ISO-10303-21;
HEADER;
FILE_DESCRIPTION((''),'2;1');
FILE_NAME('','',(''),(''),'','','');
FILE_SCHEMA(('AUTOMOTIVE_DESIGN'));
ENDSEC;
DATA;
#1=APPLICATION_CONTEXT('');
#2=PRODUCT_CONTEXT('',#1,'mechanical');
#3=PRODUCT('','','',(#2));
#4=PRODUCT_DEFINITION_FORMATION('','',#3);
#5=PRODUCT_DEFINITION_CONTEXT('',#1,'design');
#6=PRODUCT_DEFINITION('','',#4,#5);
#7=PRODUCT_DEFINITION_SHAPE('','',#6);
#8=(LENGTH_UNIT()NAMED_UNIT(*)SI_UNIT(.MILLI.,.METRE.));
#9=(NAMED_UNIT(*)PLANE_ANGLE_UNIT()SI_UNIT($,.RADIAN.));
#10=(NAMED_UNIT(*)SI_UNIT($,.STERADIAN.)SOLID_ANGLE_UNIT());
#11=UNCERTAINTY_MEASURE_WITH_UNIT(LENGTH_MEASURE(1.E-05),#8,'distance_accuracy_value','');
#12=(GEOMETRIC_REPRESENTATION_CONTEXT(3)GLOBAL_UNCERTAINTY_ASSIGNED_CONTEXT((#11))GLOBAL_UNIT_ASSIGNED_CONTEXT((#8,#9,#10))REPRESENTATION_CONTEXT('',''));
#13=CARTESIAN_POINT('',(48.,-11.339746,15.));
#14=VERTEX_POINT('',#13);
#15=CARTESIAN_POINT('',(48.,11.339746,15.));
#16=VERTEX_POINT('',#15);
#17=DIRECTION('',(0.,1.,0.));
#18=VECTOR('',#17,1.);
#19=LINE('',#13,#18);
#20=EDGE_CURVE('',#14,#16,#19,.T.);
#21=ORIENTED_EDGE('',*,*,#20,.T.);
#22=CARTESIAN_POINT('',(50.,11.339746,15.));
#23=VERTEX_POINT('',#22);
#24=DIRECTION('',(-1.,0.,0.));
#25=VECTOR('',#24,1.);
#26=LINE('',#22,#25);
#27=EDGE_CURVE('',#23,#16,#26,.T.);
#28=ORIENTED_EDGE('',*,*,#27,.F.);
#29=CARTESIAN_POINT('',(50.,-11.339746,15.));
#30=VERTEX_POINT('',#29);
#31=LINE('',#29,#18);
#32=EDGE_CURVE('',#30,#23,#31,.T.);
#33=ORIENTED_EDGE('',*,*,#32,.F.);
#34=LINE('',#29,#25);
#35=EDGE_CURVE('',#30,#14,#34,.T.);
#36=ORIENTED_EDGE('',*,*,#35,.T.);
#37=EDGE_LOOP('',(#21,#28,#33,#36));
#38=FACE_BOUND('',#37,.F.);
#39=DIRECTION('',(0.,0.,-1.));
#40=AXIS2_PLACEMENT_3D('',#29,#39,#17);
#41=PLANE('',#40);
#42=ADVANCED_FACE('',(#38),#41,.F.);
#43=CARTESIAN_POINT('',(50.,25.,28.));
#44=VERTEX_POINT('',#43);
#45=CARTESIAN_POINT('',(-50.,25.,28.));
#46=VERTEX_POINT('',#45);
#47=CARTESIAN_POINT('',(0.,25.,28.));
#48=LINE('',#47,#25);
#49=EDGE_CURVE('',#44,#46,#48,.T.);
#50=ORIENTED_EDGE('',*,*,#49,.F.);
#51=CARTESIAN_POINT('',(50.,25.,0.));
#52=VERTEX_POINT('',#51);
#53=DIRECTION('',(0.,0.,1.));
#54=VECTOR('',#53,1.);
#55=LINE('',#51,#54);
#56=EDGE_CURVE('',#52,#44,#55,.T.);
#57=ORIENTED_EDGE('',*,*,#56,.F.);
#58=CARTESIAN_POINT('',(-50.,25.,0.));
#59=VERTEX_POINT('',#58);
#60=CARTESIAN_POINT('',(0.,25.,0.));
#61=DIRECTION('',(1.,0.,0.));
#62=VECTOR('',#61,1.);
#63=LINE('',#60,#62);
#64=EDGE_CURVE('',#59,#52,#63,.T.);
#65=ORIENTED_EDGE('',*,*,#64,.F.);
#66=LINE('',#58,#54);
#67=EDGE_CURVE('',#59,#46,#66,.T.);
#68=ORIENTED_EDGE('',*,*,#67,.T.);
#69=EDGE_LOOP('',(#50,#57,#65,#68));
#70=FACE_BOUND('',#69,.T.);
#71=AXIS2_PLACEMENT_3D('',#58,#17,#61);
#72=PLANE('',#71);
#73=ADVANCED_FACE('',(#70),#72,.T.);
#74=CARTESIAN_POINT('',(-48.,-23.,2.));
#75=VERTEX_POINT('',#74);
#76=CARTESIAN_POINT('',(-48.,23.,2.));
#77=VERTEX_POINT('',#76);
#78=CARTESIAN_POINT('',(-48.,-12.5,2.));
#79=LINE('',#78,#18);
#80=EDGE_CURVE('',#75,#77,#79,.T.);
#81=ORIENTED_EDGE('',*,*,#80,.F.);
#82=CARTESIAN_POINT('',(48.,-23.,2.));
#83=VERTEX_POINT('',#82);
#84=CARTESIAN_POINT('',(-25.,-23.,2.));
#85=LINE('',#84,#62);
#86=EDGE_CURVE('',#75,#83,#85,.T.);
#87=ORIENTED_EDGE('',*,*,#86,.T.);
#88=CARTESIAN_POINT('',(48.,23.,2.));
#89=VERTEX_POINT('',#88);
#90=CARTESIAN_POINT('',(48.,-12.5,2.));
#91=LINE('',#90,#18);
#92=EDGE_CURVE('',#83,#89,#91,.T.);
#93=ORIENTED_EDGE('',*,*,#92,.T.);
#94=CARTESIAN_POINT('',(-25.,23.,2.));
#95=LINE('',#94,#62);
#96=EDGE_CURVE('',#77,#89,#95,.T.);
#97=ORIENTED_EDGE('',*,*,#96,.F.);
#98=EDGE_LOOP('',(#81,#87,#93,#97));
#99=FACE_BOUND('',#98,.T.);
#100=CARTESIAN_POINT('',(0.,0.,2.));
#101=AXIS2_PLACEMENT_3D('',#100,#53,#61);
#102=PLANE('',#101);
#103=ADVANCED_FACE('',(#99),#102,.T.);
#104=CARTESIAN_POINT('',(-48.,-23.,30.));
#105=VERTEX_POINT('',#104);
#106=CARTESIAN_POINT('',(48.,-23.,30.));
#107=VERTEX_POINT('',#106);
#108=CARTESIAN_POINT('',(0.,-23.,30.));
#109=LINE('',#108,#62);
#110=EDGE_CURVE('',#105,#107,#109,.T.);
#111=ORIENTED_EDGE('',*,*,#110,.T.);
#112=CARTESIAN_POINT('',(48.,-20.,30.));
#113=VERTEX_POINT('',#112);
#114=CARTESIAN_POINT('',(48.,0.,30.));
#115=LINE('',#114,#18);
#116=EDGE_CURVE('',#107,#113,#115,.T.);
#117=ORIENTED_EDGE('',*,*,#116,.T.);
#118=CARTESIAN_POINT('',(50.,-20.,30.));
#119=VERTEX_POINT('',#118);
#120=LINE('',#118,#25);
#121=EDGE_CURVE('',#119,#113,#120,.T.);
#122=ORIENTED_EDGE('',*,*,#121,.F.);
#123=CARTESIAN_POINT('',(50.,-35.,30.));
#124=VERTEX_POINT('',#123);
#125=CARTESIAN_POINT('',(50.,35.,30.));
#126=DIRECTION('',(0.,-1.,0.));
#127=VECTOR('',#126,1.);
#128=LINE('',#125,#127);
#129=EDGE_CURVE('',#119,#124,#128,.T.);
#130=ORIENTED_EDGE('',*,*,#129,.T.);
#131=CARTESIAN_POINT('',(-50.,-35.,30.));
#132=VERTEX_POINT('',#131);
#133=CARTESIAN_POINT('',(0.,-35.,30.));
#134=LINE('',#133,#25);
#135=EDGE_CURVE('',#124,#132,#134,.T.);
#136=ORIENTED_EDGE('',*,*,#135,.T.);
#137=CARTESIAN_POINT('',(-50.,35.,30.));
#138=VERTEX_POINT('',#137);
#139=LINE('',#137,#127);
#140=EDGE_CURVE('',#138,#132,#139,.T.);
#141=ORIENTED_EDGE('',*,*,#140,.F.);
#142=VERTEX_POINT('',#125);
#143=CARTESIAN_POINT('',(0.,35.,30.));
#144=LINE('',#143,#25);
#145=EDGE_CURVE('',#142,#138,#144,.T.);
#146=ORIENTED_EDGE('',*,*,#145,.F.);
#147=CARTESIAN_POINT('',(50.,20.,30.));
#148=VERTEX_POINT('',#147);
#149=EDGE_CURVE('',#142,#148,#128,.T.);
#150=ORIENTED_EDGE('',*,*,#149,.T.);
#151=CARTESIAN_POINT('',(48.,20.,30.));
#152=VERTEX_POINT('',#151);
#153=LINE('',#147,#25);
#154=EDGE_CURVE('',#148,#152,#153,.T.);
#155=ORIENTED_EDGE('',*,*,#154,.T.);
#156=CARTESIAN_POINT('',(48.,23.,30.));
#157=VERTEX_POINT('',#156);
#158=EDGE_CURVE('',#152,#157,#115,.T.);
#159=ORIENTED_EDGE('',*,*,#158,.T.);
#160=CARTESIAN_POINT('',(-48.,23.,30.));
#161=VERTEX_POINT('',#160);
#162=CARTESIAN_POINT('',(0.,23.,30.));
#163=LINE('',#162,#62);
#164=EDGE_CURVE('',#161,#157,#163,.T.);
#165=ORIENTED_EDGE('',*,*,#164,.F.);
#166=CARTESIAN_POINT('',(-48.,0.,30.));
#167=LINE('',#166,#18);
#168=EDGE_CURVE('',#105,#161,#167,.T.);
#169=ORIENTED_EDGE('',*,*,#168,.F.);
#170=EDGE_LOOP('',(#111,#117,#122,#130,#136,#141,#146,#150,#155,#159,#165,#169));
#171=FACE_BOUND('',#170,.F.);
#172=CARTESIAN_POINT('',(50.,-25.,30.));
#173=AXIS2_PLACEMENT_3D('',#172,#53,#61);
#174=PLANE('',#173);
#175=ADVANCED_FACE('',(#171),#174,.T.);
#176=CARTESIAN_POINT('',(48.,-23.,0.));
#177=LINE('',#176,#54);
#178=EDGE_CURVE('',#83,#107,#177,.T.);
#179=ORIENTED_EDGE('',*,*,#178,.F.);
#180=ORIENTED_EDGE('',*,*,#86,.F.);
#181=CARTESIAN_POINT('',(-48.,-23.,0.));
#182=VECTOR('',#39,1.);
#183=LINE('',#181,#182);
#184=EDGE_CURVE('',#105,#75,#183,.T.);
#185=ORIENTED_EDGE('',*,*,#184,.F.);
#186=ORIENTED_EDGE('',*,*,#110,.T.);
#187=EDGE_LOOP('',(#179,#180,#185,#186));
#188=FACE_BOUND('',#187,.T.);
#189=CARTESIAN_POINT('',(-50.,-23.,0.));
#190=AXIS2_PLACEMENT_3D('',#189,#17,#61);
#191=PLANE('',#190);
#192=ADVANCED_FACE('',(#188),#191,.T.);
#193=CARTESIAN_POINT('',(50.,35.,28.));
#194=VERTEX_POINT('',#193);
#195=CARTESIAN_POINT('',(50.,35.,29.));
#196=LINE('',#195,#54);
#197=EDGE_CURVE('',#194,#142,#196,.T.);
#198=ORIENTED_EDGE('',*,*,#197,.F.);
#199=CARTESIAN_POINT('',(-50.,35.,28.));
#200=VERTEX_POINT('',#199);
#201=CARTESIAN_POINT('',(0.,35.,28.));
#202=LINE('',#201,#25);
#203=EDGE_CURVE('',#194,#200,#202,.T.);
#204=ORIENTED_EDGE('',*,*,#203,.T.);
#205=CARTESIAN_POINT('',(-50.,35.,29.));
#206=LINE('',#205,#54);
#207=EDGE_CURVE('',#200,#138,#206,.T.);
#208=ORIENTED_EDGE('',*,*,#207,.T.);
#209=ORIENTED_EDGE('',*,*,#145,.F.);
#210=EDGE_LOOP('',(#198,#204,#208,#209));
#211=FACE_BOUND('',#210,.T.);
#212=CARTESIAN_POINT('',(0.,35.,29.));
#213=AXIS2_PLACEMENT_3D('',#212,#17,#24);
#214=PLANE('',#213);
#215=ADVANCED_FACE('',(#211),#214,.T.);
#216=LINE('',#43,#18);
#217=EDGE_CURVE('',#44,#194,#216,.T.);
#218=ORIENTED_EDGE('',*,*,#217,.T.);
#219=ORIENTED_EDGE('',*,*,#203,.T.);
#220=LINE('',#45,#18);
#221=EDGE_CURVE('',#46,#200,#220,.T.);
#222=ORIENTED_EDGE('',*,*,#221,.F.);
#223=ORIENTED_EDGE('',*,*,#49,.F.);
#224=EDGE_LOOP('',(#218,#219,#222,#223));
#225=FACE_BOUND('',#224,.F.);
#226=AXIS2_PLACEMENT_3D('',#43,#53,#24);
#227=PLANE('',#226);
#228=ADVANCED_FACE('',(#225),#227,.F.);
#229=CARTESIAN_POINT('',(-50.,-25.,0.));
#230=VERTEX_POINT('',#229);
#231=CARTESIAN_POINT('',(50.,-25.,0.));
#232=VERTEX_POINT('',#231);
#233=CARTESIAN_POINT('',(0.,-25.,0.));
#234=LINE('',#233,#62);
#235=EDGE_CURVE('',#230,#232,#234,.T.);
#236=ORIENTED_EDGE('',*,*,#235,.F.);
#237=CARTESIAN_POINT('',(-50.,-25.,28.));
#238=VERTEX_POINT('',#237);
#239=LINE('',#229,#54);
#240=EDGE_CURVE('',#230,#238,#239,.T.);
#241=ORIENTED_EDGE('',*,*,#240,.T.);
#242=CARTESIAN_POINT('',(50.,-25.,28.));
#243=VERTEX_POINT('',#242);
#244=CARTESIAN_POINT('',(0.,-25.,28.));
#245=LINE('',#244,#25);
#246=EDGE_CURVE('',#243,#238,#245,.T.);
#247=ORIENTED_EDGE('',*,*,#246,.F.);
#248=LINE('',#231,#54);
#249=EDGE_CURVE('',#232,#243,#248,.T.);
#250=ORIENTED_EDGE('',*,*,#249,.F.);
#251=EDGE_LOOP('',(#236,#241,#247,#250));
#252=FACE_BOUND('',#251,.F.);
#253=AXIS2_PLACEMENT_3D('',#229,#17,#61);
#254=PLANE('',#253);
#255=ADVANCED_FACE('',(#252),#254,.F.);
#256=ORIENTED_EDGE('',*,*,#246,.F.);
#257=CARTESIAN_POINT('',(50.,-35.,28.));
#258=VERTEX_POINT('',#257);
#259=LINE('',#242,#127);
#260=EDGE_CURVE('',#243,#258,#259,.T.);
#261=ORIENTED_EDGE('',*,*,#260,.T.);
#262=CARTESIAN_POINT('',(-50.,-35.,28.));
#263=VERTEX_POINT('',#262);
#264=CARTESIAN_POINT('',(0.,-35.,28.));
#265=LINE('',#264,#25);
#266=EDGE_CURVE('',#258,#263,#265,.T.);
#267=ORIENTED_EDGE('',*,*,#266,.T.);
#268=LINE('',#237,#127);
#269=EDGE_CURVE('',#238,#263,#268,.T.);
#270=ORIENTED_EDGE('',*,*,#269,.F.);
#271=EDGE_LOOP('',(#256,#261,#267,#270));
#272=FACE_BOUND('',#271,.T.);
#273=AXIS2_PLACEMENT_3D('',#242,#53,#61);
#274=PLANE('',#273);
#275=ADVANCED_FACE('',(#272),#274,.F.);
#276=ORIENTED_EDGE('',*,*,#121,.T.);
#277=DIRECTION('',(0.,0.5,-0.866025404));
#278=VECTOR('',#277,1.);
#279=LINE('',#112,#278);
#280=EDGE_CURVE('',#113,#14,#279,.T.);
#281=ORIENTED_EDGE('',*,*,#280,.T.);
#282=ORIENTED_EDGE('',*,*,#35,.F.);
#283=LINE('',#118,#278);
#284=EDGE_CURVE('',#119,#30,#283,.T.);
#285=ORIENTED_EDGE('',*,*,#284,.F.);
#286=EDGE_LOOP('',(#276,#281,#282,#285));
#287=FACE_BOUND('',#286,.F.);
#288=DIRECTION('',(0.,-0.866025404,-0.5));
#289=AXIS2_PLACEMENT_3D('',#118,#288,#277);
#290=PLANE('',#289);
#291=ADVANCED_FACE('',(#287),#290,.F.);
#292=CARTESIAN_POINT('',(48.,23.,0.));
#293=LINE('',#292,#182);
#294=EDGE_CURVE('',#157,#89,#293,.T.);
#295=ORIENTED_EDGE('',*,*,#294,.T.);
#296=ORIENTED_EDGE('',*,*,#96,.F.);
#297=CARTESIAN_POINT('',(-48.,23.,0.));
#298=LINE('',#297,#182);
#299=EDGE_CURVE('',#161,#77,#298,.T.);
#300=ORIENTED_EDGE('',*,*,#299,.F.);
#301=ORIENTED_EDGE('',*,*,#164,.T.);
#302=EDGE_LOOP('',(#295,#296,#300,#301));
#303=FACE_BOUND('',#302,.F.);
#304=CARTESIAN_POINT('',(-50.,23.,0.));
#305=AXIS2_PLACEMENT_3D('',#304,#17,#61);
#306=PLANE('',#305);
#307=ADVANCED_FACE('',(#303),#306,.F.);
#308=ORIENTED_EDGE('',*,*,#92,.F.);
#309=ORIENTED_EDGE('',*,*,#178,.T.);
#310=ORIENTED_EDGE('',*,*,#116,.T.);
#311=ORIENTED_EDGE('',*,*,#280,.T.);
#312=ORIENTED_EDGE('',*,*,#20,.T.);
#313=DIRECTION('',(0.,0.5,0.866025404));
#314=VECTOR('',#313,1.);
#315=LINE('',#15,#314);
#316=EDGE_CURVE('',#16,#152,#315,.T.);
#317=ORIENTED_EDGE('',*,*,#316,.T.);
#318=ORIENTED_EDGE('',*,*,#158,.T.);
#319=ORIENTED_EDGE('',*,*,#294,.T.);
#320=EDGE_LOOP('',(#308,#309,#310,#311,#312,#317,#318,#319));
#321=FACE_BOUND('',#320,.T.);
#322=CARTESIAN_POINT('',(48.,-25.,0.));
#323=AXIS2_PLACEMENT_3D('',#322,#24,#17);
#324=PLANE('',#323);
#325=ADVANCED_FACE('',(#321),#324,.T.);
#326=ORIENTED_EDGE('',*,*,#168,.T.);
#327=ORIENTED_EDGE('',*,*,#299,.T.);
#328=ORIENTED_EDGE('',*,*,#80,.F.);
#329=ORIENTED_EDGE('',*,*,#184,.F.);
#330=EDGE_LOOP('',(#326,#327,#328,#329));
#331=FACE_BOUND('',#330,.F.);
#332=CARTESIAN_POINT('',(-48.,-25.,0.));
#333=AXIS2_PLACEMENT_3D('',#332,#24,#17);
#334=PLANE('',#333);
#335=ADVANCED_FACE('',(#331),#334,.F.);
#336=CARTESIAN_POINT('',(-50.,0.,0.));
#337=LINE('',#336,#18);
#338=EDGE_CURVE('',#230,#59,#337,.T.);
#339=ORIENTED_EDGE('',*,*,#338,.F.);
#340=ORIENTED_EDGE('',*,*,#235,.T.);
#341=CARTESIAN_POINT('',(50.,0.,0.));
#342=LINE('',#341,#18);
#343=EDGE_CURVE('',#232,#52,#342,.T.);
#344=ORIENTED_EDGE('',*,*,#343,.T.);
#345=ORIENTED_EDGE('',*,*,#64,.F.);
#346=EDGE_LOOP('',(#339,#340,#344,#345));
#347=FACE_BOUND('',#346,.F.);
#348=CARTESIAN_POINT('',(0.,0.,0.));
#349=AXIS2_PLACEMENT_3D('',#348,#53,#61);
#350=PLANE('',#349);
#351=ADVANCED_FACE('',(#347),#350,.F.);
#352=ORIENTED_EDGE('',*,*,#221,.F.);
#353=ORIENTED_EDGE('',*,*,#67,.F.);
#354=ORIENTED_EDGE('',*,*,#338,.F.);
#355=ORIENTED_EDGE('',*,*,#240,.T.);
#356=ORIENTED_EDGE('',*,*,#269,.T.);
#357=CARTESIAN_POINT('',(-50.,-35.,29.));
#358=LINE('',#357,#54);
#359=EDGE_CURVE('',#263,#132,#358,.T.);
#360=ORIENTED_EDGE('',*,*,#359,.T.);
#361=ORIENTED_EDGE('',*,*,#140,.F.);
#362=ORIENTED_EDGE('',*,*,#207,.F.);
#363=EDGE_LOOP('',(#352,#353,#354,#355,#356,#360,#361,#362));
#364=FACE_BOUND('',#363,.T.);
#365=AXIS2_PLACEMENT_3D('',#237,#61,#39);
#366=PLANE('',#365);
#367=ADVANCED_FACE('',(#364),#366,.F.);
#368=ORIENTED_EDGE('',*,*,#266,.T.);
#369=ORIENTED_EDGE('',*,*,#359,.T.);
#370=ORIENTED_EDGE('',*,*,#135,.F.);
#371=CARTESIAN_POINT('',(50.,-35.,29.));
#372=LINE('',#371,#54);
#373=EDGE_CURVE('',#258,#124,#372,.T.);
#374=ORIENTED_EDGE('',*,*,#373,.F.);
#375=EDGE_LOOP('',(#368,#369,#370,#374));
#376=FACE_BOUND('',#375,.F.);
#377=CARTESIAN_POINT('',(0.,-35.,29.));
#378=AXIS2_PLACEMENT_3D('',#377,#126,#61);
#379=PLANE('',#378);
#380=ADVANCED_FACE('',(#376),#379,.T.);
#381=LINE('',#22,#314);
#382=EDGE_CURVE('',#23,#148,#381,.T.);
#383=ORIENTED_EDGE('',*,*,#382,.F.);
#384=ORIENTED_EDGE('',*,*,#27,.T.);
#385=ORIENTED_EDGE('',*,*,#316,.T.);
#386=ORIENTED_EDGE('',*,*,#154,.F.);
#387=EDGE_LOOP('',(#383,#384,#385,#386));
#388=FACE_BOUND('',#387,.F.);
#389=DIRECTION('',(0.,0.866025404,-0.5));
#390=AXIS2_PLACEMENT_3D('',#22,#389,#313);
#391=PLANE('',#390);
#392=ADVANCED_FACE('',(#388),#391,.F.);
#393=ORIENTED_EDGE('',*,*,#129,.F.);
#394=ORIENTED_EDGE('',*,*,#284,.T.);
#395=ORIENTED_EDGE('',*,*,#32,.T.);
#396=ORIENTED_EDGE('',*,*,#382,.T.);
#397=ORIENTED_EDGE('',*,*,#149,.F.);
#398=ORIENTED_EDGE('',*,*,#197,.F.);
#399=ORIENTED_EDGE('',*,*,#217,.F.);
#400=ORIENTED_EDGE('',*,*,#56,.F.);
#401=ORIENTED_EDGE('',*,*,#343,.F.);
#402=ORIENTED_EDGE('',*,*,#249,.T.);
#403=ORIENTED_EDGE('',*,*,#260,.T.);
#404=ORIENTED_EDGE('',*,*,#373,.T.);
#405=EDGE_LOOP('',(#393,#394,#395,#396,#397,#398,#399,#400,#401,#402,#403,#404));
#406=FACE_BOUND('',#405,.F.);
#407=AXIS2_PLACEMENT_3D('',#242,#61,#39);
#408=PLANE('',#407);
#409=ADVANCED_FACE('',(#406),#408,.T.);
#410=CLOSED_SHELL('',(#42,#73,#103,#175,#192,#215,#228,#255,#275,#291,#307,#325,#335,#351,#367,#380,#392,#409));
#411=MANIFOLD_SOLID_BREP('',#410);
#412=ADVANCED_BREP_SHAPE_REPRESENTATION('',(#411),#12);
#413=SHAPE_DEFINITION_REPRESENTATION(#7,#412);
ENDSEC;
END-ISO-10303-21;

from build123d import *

# Parameters (mm, degrees)
F0_W     = 100
F0_H     = 50
F1_DEPTH = 30
F2_T     = -2
F3_W     = 100
F3_H     = 2
F4_DEPTH = 10
F7_DEPTH = 2


# Not quite as in the source:
# - a pattern or mirror of a feature is missing from the dataset's text; its kind, count and spacing are read off the source's solid


with BuildPart() as f1:
    # F0 (on Top) → F1 (new body)
    with BuildSketch(Plane.XY):
        Rectangle(F0_W, F0_H)
    extrude(amount=F1_DEPTH)

    # F2
    f2_openings = [f1.faces().sort_by_distance(p)[0] for p in [
        (0, 0, 30),
    ]]
    offset(amount=F2_T, openings=f2_openings)

    # F3 (on face) → F4 (join)
    with BuildSketch(Plane(origin=(0, 25, 0), x_dir=(-1, 0, 0), z_dir=(0, 1, 0))):
        with Locations((0, 29)):
            Rectangle(F3_W, F3_H)
    f4 = extrude(amount=F4_DEPTH)

    # F4_copies: F4 across plane
    add(f4.mirror(Plane(origin=(0, 0, 0), x_dir=(0, 0, -1), z_dir=(0, -1, 0))))

    # F6 (on face) → F7 (cut, through all)
    with BuildSketch(Plane.YZ.offset(50)):
        Polygon((11.3397459622, 15), (20, 30), (-20, 30), (-11.3397459622, 15), align=None)
    extrude(amount=-F7_DEPTH, mode=Mode.SUBTRACT)


solid = f1.part
